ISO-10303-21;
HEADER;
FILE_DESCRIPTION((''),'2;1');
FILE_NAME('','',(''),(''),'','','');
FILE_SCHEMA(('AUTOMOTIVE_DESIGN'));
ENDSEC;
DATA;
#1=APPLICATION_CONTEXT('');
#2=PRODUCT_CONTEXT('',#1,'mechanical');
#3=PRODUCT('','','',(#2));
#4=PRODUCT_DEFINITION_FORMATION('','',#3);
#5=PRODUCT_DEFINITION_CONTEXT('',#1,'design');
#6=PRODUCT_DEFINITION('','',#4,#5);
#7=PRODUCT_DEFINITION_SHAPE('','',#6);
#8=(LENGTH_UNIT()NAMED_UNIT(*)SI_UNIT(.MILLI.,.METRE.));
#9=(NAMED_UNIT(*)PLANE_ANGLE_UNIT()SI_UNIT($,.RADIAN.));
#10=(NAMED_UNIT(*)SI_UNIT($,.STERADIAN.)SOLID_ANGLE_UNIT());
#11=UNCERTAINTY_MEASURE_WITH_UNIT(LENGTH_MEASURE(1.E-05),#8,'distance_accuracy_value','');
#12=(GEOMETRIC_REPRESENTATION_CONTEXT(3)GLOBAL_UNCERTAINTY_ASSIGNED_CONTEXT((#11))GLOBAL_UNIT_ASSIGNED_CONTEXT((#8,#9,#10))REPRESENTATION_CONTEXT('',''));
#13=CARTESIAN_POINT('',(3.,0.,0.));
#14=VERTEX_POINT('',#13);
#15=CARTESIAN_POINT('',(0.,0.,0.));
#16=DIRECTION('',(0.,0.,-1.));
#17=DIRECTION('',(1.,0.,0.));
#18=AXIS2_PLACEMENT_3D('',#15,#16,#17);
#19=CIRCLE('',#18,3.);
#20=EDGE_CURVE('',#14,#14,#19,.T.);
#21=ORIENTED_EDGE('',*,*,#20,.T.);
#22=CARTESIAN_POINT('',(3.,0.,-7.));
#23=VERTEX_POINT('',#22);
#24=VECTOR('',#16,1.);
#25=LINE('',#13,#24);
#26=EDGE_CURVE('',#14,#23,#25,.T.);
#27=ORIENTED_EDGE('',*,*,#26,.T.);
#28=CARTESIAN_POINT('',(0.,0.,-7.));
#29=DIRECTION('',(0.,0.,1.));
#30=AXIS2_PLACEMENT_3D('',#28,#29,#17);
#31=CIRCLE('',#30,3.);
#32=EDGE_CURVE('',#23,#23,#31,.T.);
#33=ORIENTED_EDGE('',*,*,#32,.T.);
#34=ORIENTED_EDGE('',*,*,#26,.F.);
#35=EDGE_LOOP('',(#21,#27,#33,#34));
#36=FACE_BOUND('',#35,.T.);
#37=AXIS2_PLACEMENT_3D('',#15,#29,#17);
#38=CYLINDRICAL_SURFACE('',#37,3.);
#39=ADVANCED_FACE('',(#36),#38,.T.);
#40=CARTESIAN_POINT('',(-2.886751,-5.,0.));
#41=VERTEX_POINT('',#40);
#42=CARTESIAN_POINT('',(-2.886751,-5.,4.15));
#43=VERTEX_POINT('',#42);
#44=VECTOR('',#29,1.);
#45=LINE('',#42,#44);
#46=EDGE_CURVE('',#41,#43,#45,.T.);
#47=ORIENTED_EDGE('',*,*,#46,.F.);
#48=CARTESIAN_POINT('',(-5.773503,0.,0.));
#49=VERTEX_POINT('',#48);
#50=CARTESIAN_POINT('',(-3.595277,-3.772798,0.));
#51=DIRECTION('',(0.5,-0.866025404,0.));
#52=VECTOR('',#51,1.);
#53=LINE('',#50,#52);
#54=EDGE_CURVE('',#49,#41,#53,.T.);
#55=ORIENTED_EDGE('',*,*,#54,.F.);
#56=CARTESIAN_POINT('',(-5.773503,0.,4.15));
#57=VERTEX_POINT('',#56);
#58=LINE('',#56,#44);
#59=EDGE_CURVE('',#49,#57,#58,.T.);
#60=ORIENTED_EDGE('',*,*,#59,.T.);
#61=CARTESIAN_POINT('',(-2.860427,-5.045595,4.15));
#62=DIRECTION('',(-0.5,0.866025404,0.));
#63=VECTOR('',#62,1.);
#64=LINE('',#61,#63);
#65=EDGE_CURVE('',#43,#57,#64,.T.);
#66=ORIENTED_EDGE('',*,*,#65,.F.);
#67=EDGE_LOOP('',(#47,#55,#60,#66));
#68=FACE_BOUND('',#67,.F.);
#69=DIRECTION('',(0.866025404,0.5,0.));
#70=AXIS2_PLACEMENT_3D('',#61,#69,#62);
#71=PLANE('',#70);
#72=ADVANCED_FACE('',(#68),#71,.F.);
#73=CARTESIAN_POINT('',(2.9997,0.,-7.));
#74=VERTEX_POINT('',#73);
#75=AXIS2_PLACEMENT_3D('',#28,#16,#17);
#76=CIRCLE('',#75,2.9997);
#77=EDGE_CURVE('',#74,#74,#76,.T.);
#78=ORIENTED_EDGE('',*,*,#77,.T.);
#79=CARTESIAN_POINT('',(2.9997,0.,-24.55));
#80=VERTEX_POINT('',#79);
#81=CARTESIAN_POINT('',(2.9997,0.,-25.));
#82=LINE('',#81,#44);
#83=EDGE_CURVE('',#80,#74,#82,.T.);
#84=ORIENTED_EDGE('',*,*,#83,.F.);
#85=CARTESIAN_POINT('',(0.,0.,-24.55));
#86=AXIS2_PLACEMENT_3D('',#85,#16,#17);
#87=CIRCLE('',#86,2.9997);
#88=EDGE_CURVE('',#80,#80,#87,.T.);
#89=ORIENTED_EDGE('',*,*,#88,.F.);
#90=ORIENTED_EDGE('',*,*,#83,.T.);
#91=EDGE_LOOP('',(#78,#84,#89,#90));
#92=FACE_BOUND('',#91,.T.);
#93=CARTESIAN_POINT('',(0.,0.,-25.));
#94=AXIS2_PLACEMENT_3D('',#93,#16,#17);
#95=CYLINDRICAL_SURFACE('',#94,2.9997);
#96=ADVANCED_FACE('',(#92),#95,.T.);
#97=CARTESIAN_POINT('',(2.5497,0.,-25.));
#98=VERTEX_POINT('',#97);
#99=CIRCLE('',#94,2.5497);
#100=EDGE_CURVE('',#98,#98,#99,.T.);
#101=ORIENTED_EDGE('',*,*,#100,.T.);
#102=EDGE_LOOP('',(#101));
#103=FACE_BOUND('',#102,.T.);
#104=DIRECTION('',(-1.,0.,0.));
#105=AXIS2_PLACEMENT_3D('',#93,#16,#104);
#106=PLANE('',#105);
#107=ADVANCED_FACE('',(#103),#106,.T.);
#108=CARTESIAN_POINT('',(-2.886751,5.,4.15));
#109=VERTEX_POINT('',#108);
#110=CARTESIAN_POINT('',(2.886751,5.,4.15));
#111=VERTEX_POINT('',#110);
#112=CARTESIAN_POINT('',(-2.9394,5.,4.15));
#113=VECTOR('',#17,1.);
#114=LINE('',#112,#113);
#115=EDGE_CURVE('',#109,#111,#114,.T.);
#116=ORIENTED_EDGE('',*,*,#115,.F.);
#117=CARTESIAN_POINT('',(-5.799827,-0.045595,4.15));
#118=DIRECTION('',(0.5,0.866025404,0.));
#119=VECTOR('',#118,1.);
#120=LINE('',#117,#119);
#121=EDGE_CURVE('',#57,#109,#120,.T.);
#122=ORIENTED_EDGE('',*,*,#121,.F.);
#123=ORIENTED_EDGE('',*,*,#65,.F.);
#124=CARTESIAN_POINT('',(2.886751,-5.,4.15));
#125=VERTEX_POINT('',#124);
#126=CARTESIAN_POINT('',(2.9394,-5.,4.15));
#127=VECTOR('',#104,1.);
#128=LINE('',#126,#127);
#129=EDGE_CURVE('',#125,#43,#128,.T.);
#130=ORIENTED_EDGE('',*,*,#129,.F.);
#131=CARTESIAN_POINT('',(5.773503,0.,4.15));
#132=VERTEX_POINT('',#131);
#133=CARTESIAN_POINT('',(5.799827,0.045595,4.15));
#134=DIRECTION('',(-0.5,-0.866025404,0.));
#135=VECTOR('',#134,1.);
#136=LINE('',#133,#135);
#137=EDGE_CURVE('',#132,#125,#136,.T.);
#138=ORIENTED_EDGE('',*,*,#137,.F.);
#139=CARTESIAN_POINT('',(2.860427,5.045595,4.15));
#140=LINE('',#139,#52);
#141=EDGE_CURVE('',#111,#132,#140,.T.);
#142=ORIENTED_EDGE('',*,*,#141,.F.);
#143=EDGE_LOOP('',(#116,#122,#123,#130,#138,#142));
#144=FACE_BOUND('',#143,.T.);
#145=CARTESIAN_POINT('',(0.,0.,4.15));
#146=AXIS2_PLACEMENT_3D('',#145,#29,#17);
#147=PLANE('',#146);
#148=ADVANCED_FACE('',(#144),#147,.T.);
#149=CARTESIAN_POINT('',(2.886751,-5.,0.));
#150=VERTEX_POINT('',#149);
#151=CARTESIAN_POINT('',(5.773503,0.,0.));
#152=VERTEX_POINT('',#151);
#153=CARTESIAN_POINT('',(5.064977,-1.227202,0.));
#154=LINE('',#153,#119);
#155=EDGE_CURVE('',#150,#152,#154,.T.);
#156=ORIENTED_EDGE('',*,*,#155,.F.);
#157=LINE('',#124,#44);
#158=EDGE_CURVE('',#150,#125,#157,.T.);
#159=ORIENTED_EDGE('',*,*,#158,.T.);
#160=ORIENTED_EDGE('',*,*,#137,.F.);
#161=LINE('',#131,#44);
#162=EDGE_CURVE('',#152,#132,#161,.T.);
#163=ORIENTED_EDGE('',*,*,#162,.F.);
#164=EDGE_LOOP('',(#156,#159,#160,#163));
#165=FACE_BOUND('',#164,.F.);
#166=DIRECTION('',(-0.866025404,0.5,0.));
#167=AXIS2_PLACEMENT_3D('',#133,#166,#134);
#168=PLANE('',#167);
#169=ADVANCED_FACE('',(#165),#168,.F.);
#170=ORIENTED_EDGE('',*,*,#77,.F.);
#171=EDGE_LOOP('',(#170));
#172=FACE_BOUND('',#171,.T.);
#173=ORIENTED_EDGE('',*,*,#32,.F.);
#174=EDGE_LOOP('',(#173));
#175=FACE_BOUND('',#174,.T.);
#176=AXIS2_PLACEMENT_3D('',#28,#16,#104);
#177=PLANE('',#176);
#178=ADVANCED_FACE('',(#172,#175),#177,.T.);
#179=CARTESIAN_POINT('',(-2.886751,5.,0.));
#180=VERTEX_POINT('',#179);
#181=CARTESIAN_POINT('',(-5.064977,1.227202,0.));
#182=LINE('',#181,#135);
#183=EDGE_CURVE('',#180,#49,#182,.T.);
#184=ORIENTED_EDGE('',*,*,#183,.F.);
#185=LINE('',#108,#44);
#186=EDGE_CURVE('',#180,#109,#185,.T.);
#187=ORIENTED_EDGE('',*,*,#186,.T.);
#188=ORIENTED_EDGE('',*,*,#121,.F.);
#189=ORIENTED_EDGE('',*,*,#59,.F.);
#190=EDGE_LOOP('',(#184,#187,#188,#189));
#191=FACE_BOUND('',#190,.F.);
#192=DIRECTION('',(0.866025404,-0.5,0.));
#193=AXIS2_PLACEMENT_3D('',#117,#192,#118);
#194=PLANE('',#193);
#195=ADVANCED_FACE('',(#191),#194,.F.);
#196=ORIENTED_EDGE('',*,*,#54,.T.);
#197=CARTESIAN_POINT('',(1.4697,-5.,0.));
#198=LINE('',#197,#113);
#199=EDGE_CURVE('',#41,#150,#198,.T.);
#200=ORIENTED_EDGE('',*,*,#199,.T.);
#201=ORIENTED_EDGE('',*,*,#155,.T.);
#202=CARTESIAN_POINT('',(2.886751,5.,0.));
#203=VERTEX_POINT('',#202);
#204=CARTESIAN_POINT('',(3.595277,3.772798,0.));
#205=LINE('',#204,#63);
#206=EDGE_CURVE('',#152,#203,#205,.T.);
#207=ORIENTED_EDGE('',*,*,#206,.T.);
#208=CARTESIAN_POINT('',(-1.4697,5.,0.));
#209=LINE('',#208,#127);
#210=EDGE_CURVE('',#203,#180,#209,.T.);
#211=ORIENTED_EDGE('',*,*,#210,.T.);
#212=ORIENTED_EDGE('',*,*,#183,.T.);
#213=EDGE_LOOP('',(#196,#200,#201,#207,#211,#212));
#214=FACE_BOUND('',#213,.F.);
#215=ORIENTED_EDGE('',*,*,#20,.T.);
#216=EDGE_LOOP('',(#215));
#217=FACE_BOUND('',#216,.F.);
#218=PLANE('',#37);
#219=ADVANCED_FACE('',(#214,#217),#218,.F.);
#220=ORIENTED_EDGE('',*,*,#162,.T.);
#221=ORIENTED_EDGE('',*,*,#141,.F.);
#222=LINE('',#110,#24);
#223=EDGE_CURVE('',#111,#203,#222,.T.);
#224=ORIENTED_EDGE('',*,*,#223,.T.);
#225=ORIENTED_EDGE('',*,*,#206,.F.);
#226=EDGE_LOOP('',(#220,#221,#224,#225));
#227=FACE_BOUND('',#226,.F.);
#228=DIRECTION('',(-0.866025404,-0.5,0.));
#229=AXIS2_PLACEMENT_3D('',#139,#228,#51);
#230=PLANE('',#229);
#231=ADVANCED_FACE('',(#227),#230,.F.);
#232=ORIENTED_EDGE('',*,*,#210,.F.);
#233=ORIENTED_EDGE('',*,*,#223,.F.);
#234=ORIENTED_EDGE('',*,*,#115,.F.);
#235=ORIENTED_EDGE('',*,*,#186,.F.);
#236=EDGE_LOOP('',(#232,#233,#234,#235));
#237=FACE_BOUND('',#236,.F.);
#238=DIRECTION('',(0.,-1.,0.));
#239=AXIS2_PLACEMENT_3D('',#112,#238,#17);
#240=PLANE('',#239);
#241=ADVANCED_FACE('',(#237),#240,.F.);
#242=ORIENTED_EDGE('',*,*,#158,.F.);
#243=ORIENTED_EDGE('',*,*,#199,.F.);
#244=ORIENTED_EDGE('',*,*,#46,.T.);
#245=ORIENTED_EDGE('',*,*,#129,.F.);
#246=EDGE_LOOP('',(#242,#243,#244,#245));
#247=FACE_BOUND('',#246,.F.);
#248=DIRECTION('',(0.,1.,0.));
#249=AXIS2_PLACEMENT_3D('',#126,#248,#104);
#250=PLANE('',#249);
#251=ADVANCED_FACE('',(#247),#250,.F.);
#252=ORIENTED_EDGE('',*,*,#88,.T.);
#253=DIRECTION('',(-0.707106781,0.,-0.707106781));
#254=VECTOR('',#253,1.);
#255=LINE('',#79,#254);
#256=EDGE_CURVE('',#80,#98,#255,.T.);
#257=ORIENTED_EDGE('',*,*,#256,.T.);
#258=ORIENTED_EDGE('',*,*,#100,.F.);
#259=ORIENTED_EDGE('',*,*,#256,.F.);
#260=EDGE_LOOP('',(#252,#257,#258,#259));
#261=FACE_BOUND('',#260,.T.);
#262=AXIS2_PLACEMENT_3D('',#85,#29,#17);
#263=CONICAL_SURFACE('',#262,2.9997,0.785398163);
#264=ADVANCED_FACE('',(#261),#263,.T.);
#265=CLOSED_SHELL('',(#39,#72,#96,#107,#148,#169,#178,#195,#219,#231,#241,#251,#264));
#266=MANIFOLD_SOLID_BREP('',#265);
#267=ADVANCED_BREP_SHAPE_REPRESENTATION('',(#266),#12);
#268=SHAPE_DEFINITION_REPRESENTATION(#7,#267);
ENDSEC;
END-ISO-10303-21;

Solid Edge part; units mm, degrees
sketch "Sketch1" plane through (0, 0, 0) normal (0, 0, 1) x (1, 0, 0)
  circle A0 centre (0, 0) radius 5.8
  dimension "D1" = 11.6
extrude "Protrusion1" add sketch "Sketch1" along normal blind 4.15
sketch "Sketch2" plane through (0, 0, 0) normal (0, 0, -1) x (1, 0, 0)
  circle A0 centre (0, 0) radius 3
extrude "Protrusion2" add sketch "Sketch2" along normal blind 25
sketch "Sketch3" plane through (0, 0, -25) normal (0, 0, -1) x (1, 0, 0)
  circle A0 centre (0, 0) radius 2.9997
extrude "Cutout1" cut sketch "Sketch3" against normal blind 18 flip side to cut
chamfer "Chamfer_1" distance 0.45 angle 45 1 edges at (-2.9997, 0, -25)
sketch "Sketch4" plane through (0, 0, 4.15) normal (0, 0, 1) x (1, 0, 0)
  line L0 (-2.9394, 5) -> (2.9394, 5)
  dimension "D1" = 10
extrude "Cutout2" cut sketch "Sketch4" against normal up to next material side at (0, 5.05, 4.15)
pattern_circular "Pattern1" count 6 over 360 about axis through (0, 0, 4.15) along (0, 0, 1) of "Cutout2"
properties part number "24101195"
